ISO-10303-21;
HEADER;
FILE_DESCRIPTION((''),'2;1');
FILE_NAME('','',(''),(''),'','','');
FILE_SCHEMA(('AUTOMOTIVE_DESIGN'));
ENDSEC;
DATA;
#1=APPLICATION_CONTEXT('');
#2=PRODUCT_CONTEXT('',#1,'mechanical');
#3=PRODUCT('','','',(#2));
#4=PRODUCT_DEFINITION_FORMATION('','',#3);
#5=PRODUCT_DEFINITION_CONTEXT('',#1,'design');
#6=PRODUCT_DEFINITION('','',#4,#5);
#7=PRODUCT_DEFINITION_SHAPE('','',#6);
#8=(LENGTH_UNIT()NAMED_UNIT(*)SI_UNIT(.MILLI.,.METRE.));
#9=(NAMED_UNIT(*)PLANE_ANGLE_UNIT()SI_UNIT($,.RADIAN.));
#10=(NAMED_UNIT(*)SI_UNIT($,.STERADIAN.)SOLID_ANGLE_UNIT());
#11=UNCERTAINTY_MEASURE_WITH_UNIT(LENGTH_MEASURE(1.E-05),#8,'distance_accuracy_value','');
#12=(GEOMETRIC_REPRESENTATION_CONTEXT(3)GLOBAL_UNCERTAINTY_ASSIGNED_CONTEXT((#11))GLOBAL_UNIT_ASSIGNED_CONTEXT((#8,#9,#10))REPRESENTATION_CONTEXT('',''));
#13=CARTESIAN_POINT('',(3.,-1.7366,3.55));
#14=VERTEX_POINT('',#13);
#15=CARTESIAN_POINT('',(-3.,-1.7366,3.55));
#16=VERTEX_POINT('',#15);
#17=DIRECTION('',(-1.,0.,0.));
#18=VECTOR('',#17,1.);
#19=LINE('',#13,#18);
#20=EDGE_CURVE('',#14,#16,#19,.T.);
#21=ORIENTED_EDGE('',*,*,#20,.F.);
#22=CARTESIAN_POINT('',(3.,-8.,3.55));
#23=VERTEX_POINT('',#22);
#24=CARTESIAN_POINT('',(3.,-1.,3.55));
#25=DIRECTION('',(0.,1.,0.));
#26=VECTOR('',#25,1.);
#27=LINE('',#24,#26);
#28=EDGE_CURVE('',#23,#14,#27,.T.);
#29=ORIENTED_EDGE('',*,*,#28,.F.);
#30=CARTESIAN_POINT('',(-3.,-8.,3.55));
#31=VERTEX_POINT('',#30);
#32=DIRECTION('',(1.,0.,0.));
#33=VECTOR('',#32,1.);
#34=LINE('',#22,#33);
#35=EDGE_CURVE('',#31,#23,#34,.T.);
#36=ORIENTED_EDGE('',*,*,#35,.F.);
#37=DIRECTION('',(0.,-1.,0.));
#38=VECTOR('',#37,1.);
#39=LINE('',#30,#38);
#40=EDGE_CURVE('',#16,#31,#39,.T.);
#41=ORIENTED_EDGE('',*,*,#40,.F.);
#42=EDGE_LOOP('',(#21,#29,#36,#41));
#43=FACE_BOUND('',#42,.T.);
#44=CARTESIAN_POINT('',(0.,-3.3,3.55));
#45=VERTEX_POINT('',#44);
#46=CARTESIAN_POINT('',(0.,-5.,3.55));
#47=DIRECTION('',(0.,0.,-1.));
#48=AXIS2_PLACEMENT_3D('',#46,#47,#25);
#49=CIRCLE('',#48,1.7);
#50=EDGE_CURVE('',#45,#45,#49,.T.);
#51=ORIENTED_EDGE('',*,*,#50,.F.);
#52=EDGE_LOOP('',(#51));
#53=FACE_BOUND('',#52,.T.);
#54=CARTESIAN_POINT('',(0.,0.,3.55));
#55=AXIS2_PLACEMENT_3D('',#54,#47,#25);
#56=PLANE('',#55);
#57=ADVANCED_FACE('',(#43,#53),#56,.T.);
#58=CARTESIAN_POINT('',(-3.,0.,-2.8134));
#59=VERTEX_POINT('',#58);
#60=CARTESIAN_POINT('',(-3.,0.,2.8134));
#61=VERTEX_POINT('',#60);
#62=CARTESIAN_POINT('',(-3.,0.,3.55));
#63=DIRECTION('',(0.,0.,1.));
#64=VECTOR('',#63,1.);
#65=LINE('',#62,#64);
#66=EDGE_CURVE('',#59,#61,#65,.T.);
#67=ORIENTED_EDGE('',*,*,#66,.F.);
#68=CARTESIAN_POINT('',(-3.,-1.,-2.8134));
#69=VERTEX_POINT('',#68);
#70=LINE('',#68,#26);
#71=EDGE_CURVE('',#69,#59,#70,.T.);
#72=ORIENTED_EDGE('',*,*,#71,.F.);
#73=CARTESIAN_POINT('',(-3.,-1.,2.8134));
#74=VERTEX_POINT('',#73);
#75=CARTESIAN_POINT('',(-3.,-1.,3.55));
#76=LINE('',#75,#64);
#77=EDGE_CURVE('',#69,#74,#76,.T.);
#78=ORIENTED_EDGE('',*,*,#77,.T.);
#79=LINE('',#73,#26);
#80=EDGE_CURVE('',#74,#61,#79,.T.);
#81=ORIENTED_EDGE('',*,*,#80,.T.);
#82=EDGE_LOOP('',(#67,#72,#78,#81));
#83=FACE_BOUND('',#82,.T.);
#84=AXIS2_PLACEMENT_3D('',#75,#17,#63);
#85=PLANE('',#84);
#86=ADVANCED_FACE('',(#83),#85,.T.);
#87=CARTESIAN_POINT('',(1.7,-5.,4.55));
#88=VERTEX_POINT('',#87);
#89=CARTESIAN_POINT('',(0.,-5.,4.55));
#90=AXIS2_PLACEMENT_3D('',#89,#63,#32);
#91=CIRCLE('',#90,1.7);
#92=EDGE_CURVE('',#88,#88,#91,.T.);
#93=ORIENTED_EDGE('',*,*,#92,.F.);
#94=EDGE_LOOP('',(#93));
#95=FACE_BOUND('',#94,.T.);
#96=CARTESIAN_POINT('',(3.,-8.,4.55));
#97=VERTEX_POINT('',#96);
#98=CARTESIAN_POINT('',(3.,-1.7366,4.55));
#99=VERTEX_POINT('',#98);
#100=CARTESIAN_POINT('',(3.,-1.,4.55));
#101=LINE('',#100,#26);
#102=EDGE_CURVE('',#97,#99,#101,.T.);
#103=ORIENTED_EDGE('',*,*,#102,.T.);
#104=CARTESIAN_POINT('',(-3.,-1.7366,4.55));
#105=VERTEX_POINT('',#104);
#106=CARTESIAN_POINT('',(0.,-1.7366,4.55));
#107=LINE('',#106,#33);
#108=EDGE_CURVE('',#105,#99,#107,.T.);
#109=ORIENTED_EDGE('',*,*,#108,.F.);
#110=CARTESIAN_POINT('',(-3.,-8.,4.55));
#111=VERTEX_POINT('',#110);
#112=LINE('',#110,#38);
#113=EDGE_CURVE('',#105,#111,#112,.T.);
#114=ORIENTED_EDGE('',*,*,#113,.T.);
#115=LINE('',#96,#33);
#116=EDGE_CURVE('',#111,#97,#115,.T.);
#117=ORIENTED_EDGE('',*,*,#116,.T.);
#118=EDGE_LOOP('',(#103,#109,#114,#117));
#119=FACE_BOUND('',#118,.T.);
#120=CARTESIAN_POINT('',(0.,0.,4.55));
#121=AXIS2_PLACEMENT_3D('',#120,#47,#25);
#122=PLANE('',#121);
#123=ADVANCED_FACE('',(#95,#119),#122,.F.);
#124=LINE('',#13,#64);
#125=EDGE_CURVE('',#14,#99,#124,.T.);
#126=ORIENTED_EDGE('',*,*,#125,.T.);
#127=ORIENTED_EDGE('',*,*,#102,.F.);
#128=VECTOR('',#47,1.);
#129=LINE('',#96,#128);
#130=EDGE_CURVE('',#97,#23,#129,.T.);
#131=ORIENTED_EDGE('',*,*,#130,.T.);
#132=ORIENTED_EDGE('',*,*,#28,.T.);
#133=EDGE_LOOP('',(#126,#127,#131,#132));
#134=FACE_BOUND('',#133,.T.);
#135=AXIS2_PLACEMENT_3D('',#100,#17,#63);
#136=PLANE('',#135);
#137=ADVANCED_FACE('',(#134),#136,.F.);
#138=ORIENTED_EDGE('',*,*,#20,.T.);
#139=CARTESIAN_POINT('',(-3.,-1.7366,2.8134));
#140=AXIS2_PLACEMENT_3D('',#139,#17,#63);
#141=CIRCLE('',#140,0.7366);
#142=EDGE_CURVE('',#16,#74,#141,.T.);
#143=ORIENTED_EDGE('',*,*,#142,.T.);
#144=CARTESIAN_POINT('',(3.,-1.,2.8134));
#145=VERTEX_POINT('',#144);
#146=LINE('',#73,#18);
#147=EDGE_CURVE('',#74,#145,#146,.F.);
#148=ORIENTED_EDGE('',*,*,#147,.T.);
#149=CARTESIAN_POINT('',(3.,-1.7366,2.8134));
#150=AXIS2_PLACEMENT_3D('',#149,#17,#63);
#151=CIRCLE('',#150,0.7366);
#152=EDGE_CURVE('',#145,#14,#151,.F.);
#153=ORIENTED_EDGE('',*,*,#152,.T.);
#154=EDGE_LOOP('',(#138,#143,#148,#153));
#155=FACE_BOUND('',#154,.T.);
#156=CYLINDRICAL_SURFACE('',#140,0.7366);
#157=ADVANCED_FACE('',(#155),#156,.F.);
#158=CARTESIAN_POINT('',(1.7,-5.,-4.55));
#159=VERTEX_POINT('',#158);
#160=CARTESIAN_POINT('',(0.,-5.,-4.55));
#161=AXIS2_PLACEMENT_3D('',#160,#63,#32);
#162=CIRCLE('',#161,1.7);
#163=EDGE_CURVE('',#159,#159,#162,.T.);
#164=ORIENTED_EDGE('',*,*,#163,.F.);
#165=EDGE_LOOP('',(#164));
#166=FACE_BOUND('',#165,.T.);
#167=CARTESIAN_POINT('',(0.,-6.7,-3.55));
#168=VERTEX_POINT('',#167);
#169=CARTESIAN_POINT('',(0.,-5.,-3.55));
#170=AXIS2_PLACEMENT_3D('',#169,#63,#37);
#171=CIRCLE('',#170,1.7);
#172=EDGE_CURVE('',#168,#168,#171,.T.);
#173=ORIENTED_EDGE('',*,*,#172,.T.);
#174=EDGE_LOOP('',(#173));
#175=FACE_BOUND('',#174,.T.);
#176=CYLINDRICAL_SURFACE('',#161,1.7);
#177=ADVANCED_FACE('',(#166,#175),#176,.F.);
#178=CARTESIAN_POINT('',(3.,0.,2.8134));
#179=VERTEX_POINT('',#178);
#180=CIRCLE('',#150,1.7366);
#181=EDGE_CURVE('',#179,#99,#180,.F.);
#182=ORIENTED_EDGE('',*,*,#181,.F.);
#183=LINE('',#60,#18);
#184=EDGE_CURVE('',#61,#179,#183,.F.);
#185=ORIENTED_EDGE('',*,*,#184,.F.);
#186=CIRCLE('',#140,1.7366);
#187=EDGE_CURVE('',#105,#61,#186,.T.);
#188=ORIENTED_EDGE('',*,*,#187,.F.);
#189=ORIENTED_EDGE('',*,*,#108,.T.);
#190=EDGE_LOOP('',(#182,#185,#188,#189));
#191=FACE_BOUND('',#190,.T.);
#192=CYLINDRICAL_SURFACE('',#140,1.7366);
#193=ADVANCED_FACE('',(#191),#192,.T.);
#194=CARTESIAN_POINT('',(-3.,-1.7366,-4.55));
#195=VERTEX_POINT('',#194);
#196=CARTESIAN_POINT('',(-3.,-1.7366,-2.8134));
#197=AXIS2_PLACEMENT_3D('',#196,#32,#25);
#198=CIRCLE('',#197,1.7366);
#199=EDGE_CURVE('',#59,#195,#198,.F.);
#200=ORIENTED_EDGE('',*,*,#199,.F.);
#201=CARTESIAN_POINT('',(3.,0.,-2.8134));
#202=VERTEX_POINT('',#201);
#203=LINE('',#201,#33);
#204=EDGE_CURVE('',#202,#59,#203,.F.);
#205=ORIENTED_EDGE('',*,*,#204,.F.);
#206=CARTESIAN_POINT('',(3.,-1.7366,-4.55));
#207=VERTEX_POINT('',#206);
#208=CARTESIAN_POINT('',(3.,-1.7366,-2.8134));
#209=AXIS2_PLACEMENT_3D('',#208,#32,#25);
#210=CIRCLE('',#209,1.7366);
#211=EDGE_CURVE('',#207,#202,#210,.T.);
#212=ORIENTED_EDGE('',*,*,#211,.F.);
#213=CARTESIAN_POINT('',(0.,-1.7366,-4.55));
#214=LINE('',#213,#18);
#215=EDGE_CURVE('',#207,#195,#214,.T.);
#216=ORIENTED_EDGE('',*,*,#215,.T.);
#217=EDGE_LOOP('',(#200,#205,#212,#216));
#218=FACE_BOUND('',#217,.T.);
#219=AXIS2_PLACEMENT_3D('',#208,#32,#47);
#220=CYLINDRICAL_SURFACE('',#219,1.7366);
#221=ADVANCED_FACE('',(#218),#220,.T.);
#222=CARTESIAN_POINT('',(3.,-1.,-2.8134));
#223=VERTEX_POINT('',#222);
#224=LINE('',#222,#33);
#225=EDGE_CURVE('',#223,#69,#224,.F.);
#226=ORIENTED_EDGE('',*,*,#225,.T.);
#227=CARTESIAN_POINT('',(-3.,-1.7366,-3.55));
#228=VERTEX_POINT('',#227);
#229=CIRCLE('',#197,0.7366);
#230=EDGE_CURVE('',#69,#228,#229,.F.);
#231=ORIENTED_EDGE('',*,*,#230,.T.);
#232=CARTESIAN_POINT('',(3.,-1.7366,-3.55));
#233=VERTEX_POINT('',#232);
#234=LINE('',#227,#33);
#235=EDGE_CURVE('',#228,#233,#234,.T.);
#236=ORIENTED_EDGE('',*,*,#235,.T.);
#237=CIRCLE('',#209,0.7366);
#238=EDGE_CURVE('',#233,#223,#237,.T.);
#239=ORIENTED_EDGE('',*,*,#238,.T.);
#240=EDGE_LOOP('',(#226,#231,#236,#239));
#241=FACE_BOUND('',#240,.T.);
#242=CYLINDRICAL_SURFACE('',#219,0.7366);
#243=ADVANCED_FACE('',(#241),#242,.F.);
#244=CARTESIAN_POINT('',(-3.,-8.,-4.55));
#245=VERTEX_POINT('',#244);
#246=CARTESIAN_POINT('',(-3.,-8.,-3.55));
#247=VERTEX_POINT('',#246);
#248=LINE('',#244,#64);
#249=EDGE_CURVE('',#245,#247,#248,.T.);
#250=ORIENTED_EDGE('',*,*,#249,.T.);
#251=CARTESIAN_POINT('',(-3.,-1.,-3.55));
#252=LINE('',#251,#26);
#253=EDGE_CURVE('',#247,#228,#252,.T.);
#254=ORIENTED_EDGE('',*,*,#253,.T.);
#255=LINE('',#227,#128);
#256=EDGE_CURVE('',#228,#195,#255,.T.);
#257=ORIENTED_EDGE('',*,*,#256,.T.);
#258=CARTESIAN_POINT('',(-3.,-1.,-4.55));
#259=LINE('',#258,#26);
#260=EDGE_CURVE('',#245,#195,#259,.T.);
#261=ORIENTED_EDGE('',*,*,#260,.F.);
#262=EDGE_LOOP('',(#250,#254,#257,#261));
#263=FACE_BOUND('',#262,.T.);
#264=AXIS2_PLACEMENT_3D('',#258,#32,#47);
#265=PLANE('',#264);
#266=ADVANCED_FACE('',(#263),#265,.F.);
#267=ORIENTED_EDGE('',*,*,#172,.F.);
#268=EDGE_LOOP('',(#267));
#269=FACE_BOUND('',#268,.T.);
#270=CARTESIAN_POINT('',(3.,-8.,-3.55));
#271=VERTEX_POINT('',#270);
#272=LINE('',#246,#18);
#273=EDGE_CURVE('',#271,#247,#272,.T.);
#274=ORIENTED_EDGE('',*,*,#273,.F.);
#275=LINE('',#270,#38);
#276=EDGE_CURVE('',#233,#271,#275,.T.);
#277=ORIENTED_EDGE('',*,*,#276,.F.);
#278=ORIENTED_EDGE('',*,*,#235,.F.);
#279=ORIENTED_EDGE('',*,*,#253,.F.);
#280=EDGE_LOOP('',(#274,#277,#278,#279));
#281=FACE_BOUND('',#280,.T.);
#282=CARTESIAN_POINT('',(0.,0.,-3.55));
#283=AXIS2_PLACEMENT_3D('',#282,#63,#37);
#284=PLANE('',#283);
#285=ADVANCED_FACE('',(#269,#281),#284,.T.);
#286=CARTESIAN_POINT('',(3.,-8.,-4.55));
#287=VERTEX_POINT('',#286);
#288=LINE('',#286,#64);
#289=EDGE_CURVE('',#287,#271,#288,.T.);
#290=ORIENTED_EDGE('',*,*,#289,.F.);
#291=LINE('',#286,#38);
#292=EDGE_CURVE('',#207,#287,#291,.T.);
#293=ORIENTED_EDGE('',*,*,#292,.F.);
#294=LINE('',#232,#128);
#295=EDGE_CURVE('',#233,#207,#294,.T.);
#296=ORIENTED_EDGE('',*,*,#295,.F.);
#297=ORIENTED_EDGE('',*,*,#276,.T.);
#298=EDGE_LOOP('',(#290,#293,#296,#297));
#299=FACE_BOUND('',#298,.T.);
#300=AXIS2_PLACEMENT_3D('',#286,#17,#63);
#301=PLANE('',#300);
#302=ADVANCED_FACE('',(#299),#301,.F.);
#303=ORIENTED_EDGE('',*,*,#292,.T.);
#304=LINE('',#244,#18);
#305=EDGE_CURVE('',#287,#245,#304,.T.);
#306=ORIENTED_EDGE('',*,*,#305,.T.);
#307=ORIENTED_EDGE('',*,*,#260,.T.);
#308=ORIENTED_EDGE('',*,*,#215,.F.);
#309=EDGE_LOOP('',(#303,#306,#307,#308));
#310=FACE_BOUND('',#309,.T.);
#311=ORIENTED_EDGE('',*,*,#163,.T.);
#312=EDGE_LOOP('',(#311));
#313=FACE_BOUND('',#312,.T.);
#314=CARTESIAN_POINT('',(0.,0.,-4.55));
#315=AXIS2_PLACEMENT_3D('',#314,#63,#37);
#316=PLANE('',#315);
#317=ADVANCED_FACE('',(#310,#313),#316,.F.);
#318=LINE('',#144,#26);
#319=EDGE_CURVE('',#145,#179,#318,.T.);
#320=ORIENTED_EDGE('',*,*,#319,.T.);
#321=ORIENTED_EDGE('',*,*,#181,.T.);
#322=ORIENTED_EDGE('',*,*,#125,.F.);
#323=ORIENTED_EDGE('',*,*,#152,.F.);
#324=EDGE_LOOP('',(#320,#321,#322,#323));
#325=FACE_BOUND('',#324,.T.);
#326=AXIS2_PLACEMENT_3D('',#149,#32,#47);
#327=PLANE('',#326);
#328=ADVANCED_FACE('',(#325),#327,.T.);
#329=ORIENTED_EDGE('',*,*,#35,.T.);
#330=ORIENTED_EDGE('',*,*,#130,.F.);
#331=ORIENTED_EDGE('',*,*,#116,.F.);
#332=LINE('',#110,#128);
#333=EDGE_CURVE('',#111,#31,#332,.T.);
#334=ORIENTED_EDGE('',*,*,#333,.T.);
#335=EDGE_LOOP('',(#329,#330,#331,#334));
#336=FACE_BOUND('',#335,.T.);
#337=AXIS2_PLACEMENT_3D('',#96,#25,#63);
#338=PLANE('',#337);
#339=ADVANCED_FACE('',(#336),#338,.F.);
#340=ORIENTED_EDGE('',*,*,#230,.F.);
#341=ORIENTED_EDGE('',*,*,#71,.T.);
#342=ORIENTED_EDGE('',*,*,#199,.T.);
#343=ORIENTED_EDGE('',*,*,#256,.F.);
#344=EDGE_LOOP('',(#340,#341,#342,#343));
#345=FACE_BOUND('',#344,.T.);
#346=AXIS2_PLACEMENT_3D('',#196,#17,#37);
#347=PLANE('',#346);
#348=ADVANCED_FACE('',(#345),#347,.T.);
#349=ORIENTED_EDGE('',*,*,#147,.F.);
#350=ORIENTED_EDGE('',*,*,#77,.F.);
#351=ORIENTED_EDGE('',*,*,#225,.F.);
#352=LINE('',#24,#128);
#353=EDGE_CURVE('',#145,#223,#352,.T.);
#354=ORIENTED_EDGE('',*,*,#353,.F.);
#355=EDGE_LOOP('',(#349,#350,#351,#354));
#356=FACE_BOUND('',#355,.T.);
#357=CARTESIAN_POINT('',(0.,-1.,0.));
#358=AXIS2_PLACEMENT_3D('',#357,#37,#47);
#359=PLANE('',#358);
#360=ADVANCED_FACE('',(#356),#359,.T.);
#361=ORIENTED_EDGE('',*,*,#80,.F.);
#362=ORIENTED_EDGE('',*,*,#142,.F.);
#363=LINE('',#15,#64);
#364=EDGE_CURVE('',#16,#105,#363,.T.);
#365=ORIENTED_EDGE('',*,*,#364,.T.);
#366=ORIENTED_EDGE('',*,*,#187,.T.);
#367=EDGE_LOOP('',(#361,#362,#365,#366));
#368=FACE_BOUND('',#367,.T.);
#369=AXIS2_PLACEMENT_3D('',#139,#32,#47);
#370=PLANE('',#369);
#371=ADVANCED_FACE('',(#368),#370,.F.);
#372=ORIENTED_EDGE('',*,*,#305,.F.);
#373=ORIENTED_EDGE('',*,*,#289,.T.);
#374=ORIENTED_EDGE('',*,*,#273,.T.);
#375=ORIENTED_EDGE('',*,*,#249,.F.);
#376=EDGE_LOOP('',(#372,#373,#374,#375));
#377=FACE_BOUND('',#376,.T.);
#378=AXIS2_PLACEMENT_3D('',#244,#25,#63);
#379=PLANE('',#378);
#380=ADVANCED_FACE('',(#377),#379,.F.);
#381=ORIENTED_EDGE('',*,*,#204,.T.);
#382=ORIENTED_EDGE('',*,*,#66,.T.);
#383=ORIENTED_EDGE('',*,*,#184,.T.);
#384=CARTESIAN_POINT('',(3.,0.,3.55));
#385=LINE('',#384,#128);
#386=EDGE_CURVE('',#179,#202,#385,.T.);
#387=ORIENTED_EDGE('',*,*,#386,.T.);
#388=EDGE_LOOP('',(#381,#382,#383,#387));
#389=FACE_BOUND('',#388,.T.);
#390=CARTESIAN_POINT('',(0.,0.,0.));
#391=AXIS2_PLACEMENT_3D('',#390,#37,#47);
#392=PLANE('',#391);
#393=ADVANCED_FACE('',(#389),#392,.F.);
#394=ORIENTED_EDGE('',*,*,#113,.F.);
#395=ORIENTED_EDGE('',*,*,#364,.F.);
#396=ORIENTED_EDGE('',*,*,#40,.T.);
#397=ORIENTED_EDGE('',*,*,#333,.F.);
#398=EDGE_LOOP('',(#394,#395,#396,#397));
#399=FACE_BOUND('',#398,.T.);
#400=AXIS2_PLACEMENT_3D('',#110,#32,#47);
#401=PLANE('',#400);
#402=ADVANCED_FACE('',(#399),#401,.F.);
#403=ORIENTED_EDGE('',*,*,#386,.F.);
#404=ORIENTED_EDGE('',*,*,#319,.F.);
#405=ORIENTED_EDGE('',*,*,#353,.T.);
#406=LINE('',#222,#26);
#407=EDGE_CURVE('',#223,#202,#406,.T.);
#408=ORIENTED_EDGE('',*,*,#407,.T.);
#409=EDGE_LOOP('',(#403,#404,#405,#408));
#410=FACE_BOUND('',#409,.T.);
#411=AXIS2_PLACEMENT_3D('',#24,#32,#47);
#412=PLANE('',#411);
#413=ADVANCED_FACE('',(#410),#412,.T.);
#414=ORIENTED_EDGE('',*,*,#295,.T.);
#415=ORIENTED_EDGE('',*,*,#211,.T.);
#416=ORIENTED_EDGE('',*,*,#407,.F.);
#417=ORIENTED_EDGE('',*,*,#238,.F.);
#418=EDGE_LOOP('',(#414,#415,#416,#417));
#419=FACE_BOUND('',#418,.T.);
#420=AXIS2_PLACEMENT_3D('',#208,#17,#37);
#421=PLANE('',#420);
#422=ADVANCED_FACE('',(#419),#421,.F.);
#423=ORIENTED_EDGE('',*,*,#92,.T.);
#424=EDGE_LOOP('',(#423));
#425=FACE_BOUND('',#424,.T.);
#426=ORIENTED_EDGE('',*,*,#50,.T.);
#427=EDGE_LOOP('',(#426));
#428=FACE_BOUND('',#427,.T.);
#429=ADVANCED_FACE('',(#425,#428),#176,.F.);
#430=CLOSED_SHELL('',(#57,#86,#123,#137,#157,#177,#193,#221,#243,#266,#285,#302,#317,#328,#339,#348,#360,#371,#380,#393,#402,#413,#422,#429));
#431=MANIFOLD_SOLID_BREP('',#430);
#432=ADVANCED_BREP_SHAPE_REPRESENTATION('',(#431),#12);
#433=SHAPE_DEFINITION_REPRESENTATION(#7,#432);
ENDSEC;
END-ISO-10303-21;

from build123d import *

# Parameters (mm, degrees)
ESQUISSE1_W                             = 6
ESQUISSE1_H                             = 7.1
T_LE_DE_BASE_PLI_E1_DEPTH               = 1
T_LE_PLI_E_SUR_AR_TE1_STRIP_W           = 5.4732
T_LE_PLI_E_SUR_AR_TE1_STRIP_H           = 1
T_LE_PLI_E_SUR_AR_TE1_STRIP_CUT_DEPTH   = 6
T_LE_PLI_E_SUR_AR_TE1_STRIP_2_W         = 5.4732
T_LE_PLI_E_SUR_AR_TE1_STRIP_2_H         = 1
T_LE_PLI_E_SUR_AR_TE1_STRIP_CUT_2_DEPTH = 6
T_LE_PLI_E_SUR_AR_TE1_DEPTH             = 6
T_LE_PLI_E_SUR_AR_TE1_BEND_DEPTH        = 6
ESQUISSE12_R                            = 1.7
ENL_V_MAT_EXTRU_1_DEPTH                 = 13.482387592


# Sheet-metal steps are written as plain solids
with BuildPart() as part:
    # Esquisse1 → Tôle de base pliée1 (new body)
    with BuildSketch(Plane(origin=(0, 0, 0), x_dir=(1, 0, 0), z_dir=(0, 1, 0))):
        Rectangle(ESQUISSE1_W, ESQUISSE1_H)
    extrude(amount=-T_LE_DE_BASE_PLI_E1_DEPTH)

    # Tôle pliée sur arête1 strip (across the edge) → Tôle pliée sur arête1 strip cut (cut)
    with BuildSketch(Plane(origin=(3, -1, 3.55), x_dir=(0, 0, -1), z_dir=(-1, 0, 0))):
        with Locations((-2, -0.5)):
            Rectangle(T_LE_PLI_E_SUR_AR_TE1_STRIP_W, T_LE_PLI_E_SUR_AR_TE1_STRIP_H)
    extrude(amount=T_LE_PLI_E_SUR_AR_TE1_STRIP_CUT_DEPTH, mode=Mode.SUBTRACT)

    # Tôle pliée sur arête1 strip 2 (across the edge) → Tôle pliée sur arête1 strip cut 2 (cut)
    with BuildSketch(Plane(origin=(-3, -1, -3.55), x_dir=(0, 0, 1), z_dir=(1, 0, 0))):
        with Locations((-2, -0.5)):
            Rectangle(T_LE_PLI_E_SUR_AR_TE1_STRIP_2_W, T_LE_PLI_E_SUR_AR_TE1_STRIP_2_H)
    extrude(amount=T_LE_PLI_E_SUR_AR_TE1_STRIP_CUT_2_DEPTH, mode=Mode.SUBTRACT)

    # Tôle pliée sur arête1 section (across the edge) → Tôle pliée sur arête1 (add)
    with BuildSketch(Plane(origin=(3, -1, 3.55), x_dir=(0, 0, -1), z_dir=(-1, 0, 0))):
        with BuildLine():
            Line((-1, 0.7366), (-1, 7))
            Line((-1, 7), (0, 7))
            Line((0, 7), (0, 0.7366))
            ThreePointArc((0, 0.7366), (0.215745145, 0.215745145), (0.7366, 0))
            Line((0.7366, 0), (0.7366, -1))
            ThreePointArc((0.7366, -1), (-0.491361636, -0.491361636), (-1, 0.7366))
        make_face()
    extrude(amount=T_LE_PLI_E_SUR_AR_TE1_DEPTH)

    # Tôle pliée sur arête1 section 2 (across the edge) → Tôle pliée sur arête1 bend (add)
    with BuildSketch(Plane(origin=(-3, -1, -3.55), x_dir=(0, 0, 1), z_dir=(1, 0, 0))):
        with BuildLine():
            Line((-1, 0.7366), (-1, 7))
            Line((-1, 7), (0, 7))
            Line((0, 7), (0, 0.7366))
            ThreePointArc((0, 0.7366), (0.215745145, 0.215745145), (0.7366, 0))
            Line((0.7366, 0), (0.7366, -1))
            ThreePointArc((0.7366, -1), (-0.491361636, -0.491361636), (-1, 0.7366))
        make_face()
    extrude(amount=T_LE_PLI_E_SUR_AR_TE1_BEND_DEPTH)

    # Esquisse12 → Enlèv. mat.-Extru.1 (cut, through all)
    with BuildSketch(Plane.XY.offset(4.55)):
        with Locations((0, -5)):
            Circle(ESQUISSE12_R)
    extrude(amount=-ENL_V_MAT_EXTRU_1_DEPTH, mode=Mode.SUBTRACT)


solid = part.part
